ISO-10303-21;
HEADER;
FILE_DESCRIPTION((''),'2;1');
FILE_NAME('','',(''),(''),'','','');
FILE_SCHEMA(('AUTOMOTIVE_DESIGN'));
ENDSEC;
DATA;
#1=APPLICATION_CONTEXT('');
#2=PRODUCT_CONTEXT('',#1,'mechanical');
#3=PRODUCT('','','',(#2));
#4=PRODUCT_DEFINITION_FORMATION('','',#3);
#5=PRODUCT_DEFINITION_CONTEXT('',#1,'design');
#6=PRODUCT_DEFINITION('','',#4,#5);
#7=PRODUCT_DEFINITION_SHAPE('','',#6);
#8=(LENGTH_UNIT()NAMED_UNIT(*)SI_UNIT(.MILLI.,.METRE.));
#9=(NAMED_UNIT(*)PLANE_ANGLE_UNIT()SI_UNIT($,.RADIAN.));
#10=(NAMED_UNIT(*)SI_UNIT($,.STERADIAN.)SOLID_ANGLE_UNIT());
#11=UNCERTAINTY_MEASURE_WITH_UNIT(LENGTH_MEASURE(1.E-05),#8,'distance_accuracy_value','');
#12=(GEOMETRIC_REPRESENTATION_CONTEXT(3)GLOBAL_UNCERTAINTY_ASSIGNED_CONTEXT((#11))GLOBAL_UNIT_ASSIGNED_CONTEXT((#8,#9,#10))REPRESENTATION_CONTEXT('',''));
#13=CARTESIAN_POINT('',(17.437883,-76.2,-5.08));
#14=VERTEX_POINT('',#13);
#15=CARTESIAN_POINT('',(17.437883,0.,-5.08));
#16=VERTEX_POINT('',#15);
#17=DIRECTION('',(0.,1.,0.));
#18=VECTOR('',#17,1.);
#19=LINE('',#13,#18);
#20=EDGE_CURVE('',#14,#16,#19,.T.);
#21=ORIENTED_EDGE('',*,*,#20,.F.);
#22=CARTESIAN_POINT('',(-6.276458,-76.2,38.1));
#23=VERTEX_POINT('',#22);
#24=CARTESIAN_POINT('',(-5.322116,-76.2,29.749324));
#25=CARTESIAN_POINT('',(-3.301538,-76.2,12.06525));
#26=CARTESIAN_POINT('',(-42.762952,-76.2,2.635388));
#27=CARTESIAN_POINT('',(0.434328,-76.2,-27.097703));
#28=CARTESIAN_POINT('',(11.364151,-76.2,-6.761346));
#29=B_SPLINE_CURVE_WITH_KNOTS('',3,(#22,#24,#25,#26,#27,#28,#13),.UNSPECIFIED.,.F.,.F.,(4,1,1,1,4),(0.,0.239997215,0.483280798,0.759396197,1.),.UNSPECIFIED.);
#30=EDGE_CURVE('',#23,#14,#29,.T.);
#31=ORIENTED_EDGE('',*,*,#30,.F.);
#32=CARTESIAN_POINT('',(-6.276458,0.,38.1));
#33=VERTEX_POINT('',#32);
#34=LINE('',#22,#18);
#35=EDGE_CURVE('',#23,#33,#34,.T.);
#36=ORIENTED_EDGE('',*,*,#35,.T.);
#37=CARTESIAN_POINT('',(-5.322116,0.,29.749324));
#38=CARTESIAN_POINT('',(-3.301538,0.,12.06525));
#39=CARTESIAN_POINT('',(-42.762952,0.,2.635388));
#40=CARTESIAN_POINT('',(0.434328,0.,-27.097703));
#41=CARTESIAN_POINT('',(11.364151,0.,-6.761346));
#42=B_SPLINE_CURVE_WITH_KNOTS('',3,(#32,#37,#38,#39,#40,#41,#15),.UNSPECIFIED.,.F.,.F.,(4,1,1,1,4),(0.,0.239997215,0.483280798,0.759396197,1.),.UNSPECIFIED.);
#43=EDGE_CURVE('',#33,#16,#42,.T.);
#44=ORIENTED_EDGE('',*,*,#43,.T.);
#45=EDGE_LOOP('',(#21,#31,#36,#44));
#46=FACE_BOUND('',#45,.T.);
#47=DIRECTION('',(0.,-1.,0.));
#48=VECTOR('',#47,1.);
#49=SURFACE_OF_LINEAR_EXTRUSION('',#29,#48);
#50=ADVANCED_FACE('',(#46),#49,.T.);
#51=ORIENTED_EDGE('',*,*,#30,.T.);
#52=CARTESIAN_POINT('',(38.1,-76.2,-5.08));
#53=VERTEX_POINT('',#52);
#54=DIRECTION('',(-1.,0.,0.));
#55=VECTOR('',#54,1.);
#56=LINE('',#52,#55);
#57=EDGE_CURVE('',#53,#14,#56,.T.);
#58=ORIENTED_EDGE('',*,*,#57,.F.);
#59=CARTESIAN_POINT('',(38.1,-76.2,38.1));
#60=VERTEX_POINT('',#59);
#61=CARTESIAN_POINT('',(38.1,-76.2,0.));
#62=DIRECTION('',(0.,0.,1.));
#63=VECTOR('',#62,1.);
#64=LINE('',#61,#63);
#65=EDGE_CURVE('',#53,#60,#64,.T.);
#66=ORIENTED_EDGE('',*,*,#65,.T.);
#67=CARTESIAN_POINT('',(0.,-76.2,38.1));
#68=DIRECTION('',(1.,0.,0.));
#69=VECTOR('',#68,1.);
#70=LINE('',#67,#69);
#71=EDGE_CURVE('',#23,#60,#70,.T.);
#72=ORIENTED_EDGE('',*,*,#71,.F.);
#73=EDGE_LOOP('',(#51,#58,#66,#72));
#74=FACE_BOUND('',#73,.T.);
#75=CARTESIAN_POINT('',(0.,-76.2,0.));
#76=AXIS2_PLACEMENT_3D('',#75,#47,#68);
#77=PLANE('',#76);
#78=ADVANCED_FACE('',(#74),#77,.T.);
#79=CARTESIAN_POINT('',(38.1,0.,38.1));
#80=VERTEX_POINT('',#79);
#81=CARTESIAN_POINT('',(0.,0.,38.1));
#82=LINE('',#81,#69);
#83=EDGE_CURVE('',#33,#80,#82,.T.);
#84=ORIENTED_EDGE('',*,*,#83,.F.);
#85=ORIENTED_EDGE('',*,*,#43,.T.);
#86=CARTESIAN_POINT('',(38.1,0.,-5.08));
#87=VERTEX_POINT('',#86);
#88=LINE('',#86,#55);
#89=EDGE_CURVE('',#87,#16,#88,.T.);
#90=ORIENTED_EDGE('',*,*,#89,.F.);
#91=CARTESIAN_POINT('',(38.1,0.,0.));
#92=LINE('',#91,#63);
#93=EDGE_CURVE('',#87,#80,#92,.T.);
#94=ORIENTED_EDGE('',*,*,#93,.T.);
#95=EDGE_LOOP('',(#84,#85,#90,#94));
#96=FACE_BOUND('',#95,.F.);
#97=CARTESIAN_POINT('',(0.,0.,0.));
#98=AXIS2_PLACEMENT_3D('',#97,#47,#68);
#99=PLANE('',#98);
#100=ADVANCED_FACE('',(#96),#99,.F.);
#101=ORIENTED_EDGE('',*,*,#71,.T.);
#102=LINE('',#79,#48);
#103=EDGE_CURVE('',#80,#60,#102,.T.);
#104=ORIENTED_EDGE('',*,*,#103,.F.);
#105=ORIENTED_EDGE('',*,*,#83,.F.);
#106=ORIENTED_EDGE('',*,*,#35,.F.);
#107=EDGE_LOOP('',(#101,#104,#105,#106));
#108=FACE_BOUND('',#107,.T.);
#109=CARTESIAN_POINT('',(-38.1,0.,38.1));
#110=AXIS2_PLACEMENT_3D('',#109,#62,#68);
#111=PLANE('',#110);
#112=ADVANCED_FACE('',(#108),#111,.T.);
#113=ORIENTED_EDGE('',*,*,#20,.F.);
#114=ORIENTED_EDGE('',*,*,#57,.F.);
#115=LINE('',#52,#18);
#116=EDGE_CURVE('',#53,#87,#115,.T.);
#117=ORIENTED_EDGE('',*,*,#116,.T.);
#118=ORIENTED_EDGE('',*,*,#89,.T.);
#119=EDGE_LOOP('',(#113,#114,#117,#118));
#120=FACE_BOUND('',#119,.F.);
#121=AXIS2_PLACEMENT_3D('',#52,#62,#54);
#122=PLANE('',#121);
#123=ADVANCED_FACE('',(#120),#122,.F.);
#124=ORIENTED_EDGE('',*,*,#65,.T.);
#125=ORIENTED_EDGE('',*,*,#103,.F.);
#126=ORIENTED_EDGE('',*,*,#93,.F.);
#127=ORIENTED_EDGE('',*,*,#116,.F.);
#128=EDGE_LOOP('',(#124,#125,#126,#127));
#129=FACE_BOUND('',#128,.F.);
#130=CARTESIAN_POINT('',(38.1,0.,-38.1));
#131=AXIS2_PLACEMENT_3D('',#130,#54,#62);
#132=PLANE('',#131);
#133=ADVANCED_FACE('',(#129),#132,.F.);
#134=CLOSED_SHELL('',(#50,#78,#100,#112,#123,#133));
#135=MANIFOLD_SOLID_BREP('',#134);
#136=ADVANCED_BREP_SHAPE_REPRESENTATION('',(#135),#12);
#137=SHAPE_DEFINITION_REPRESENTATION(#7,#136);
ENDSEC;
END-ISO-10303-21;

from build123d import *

# Parameters (mm, degrees)
F1_W     = 76.2
F1_H     = 76.2
F2_DEPTH = 76.2
F4_DEPTH = 76.2


# Not quite as in the source:
# - a variable given as a bare number and used for a length is read in inches; the dataset says mm whatever the document's units were


with BuildPart() as f2:
    # F1 (on Front) → F2 (new body)
    with BuildSketch(Plane.XZ):
        Rectangle(F1_W, F1_H)
    extrude(amount=F2_DEPTH)

    # F3 (on face) → F4 (cut)
    with BuildSketch(Plane.XZ.offset(76.2)):
        with BuildLine():
            add(Edge.make_bspline(
                [(-6.2764575705, 38.1), (-5.3221160752, 29.749324156), (-3.3015376501, 12.0652499196), (-42.7629516579, 2.6353877105), (0.4343283996, -27.0977029844), (11.3641512474, -6.7613463281), (17.4378827214, -5.08)],
                knots=[0, 0, 0, 0, 0.2399972153, 0.4832807981, 0.7593961967, 1, 1, 1, 1], degree=3))
            Line((-6.2764575705, 38.1), (-38.1, 38.1))
            Line((-38.1, 38.1), (-38.1, -38.1))
            Line((-38.1, -38.1), (38.1, -38.1))
            Line((38.1, -38.1), (38.1, -5.08))
            Line((38.1, -5.08), (17.4378827214, -5.08))
        make_face()
    extrude(amount=-F4_DEPTH, mode=Mode.SUBTRACT)


solid = f2.part
